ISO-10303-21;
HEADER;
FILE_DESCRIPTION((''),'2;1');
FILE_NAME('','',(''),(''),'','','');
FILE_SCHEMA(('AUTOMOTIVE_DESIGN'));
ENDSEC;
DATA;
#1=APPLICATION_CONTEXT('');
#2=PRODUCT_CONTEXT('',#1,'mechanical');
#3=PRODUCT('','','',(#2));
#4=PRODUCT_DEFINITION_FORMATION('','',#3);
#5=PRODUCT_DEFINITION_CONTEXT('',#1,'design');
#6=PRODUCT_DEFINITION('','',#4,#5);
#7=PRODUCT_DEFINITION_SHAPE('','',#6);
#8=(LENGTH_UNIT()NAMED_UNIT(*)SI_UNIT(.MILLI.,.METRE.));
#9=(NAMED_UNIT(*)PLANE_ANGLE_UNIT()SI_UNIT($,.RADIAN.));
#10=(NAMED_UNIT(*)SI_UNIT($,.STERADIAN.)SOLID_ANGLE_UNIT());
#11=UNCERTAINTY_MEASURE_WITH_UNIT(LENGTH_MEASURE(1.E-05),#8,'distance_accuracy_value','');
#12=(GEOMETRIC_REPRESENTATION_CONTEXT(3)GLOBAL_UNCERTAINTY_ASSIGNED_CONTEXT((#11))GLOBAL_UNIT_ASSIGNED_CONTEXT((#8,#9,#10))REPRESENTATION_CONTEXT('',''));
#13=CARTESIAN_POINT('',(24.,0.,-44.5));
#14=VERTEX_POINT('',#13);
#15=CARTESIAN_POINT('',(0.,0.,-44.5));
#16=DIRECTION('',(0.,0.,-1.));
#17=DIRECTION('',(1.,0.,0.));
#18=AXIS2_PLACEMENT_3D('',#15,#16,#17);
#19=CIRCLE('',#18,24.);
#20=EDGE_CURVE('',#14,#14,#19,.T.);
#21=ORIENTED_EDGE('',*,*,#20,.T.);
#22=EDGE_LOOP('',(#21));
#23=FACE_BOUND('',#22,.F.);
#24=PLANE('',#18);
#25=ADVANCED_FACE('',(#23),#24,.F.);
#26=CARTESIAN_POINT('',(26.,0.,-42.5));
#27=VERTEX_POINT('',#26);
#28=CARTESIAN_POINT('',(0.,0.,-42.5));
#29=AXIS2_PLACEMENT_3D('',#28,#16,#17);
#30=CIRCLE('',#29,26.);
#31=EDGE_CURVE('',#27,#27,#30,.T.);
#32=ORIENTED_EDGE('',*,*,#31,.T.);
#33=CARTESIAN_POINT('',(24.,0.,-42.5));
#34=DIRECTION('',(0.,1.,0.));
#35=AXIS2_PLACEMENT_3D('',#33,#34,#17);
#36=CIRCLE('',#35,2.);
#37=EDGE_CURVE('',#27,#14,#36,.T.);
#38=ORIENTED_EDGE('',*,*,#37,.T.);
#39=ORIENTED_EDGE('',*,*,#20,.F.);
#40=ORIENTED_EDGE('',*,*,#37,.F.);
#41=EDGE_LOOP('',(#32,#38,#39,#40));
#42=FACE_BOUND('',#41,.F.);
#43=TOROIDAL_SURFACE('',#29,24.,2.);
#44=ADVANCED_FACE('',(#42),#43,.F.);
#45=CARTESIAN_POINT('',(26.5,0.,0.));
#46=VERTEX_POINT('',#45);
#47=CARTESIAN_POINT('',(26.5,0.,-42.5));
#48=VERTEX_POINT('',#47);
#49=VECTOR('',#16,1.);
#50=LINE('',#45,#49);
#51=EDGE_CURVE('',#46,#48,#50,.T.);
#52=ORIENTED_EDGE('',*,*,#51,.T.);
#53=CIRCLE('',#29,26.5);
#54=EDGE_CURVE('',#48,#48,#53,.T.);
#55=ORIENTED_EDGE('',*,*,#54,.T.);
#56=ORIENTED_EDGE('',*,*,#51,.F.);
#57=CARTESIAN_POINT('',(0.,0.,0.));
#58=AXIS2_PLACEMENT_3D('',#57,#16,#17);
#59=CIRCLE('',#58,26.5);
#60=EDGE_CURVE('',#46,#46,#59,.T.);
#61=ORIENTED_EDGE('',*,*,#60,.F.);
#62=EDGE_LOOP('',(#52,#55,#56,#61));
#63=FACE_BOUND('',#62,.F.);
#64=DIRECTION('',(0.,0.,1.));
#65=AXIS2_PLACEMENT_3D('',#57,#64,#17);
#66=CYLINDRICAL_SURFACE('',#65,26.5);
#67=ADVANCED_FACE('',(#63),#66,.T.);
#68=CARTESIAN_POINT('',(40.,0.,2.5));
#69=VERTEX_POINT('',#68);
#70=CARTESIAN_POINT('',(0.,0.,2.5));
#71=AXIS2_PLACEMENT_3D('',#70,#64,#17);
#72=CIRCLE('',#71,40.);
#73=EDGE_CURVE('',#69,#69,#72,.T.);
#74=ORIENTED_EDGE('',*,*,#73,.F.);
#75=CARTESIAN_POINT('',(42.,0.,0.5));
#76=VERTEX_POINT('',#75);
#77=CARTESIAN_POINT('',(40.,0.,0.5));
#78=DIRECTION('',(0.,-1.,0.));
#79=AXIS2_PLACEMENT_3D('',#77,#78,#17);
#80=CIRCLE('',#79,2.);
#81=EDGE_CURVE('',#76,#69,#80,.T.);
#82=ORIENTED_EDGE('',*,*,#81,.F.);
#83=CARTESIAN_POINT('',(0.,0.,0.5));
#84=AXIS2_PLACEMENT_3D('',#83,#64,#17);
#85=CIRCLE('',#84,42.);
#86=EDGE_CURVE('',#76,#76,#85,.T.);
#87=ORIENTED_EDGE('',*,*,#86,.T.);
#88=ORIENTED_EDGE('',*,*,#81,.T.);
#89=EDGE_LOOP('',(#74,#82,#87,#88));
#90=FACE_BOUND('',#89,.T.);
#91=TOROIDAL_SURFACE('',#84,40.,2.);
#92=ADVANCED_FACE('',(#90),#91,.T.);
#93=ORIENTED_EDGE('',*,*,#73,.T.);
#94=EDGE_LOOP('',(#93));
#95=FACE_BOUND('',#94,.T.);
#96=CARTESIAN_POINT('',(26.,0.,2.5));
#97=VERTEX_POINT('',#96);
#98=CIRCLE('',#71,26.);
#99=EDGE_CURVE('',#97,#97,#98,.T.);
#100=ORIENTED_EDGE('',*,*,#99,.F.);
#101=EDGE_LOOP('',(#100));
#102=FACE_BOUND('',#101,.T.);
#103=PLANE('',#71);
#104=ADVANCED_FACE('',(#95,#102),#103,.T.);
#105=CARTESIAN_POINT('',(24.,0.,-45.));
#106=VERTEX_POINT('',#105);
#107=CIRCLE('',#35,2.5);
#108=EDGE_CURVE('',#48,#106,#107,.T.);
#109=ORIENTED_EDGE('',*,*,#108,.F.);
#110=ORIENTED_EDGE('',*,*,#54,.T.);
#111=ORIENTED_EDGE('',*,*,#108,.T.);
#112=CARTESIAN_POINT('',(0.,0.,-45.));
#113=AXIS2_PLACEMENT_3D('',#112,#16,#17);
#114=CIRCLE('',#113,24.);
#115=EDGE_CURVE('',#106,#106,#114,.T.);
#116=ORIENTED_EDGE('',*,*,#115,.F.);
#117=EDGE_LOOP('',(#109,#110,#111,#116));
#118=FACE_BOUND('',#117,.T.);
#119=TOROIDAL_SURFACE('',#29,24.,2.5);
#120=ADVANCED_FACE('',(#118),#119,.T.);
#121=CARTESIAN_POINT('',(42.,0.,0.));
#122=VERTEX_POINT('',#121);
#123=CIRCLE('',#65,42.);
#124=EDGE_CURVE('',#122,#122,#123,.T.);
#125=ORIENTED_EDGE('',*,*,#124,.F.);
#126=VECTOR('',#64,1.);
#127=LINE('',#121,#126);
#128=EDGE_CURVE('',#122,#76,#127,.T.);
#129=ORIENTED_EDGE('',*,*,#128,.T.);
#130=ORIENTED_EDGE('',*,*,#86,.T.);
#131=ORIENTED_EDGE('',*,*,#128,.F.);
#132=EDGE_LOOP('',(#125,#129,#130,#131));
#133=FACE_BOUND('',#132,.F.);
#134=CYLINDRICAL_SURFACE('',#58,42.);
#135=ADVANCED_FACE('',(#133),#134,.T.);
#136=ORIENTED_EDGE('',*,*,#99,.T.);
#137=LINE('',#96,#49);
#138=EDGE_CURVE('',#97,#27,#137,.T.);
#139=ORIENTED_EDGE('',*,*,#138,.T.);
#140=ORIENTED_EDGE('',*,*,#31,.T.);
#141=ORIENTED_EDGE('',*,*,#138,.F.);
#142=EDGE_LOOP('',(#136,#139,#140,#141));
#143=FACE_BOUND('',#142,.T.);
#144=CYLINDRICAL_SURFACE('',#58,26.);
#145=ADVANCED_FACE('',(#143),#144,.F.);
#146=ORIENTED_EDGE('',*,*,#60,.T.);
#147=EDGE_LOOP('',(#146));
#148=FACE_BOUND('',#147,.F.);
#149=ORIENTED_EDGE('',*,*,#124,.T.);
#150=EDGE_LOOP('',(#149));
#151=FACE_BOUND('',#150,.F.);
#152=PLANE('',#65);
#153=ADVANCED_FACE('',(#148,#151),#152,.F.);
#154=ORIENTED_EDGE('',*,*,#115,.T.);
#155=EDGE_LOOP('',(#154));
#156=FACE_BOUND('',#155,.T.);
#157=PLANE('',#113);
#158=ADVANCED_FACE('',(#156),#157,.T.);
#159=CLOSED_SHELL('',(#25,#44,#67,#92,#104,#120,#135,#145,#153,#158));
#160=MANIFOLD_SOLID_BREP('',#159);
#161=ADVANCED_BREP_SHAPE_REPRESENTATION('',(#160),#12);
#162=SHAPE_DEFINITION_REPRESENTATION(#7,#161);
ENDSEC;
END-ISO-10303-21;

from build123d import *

# Parameters (mm, degrees)
F0_R     = 42
F0_R_2   = 26
F1_DEPTH = 2.5
F2_R     = 2
F3_R     = 26.5
F4_DEPTH = 45
F5_R     = 2.5
F6_T     = -0.5


# Not quite as in the source:
# - a shell that OpenCascade refuses in one call is made with other operations: the cavity is built on its own and cut out


with BuildPart() as f1:
    # F0 (on Top) → F1 (new body)
    with BuildSketch(Plane.XY):
        Circle(F0_R)
        Circle(F0_R_2, mode=Mode.SUBTRACT)
    extrude(amount=F1_DEPTH)

    # F2
    f2_edges = [f1.edges().sort_by_distance(p)[0] for p in [
        (-42, 0, 2.5),
    ]]
    fillet(f2_edges, radius=F2_R)

    # F3 (on face) → F4 (join)
    with BuildSketch(Plane(origin=(0, 0, 0), x_dir=(1, 0, 0), z_dir=(0, 0, -1))):
        Circle(F3_R)
    extrude(amount=F4_DEPTH)

    # F5
    f5_edges = [f1.edges().sort_by_distance(p)[0] for p in [
        (-26.5, 0, -45),
    ]]
    fillet(f5_edges, radius=F5_R)

    # F6: a shell. OpenCascade refuses it in one call, so the cavity is built on its own and cut out:
    # the body offset inwards by the wall thickness, plus a prism from it out through each open face.
    f6_core = offset(f1.part, amount=F6_T, kind=Kind.INTERSECTION, mode=Mode.PRIVATE)
    f6_exits = [f6_core.faces().sort_by_distance(p)[0] for p in [
        (0, 0, -0.5),
    ]]
    add(f6_core, mode=Mode.SUBTRACT)
    extrude(f6_exits, amount=-F6_T, mode=Mode.SUBTRACT)


solid = f1.part
